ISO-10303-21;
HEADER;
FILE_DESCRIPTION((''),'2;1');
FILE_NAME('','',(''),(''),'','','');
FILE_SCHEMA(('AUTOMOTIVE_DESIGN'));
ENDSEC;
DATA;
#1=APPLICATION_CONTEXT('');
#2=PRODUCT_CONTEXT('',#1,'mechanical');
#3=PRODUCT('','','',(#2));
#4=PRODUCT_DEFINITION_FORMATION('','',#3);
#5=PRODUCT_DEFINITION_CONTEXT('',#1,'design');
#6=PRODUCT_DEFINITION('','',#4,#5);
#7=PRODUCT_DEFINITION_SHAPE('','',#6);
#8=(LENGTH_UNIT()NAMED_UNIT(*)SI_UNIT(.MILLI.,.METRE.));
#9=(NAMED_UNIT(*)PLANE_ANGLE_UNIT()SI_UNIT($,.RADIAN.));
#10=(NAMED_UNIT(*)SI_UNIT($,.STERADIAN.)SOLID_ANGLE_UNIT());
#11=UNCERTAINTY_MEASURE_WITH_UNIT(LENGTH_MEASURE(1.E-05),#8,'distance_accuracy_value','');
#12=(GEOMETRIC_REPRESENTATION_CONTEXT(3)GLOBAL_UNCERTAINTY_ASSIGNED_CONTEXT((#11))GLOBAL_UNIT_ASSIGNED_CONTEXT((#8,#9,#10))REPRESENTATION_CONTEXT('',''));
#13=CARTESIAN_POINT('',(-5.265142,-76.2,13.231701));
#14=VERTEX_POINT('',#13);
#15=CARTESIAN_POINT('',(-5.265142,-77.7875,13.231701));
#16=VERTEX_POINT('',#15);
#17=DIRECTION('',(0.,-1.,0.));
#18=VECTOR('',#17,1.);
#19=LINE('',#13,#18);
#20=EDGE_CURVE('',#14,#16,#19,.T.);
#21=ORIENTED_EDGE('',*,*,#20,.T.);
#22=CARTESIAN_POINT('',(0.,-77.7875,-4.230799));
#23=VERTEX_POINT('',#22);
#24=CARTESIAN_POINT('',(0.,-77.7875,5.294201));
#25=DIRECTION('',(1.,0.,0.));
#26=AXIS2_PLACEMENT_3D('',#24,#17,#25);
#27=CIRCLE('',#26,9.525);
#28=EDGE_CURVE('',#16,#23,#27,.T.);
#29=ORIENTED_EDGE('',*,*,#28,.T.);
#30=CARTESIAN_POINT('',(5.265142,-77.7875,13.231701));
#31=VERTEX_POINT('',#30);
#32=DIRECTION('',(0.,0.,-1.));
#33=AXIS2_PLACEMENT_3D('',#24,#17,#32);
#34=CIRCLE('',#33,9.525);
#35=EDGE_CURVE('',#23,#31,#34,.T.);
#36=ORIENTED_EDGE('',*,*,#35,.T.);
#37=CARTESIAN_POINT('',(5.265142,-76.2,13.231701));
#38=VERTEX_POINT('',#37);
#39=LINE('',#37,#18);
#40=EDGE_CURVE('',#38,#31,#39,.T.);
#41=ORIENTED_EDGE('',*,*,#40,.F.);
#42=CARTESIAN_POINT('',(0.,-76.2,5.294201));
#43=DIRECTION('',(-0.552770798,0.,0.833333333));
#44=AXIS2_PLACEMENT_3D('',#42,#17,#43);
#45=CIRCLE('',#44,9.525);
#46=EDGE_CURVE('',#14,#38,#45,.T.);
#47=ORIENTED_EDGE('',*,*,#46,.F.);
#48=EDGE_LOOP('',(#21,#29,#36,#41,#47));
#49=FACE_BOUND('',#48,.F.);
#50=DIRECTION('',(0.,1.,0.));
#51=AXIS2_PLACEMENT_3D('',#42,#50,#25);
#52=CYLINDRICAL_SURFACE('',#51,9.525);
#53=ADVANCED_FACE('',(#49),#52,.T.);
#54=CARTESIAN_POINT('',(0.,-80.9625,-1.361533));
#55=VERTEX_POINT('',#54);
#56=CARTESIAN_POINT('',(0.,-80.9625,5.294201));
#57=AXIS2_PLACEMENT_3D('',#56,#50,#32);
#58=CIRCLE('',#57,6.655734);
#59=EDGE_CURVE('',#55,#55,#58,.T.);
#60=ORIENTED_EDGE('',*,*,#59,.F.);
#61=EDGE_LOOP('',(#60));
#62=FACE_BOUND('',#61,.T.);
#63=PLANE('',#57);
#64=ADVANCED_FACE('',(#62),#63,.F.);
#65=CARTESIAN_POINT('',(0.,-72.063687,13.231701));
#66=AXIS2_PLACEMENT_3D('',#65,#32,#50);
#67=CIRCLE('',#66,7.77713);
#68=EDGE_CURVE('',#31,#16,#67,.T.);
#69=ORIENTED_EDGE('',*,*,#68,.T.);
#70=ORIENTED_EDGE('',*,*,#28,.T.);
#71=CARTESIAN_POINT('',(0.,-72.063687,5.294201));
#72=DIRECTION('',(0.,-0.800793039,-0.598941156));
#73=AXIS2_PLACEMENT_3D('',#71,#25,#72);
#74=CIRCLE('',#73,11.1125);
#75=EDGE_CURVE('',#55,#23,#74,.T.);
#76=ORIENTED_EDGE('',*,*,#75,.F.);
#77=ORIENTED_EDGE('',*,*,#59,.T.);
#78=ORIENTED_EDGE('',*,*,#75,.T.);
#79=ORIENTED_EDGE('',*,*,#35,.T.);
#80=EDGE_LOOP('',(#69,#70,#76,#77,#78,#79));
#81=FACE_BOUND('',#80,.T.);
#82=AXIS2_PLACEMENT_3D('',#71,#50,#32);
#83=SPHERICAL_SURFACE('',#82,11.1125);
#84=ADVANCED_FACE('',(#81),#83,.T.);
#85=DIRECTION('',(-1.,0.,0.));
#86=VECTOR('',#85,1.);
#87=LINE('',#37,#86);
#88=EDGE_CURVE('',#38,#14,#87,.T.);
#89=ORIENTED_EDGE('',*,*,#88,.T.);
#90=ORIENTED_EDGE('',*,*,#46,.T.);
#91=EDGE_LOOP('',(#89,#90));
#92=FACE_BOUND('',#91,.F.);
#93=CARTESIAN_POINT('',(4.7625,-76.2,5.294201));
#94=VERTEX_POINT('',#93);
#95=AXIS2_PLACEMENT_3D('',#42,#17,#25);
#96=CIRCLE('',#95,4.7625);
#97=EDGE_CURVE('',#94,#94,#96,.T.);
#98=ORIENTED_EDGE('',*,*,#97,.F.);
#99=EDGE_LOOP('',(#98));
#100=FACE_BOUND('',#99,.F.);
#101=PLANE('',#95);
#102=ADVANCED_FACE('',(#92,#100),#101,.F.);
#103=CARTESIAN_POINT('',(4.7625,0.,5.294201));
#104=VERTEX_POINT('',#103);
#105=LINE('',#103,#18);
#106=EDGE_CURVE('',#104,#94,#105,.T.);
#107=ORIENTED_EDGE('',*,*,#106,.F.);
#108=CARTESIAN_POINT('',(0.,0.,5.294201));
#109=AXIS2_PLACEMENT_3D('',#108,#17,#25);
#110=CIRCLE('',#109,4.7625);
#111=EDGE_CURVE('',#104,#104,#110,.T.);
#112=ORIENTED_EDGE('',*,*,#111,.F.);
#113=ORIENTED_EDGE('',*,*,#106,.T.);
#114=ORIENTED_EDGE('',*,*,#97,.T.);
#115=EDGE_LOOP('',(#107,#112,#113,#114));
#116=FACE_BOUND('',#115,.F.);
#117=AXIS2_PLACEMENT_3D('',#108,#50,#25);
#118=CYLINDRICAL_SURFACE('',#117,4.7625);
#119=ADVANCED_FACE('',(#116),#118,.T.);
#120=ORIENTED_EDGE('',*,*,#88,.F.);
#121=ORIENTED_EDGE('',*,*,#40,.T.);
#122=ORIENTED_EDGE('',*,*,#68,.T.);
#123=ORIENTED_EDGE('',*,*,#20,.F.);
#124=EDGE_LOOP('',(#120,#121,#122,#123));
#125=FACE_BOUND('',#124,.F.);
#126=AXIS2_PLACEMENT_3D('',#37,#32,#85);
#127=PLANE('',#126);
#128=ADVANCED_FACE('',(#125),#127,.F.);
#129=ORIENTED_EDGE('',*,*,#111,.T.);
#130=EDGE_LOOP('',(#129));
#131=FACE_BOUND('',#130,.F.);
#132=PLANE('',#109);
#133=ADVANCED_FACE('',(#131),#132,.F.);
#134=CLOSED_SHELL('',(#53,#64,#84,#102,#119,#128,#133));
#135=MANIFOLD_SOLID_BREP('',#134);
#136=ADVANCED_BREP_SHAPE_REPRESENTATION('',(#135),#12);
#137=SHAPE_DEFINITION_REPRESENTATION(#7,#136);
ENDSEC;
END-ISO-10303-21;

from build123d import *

# Parameters (mm, degrees)
F0_R     = 4.7625
F1_DEPTH = 76.2
F2_R     = 9.525
F2_R_2   = 4.7625
F3_DEPTH = 1.5875
F7_DEPTH = 25.4


# Not quite as in the source:
# - a length typed as a fraction of an inch, garbled in the dataset ("3 / 203.2 mm" for 3/8 in), is restored


with BuildPart() as f1:
    # F0 (on Front) → F1 (new body)
    with BuildSketch(Plane.XZ):
        with Locations((0, 5.2942009643)):
            Circle(F0_R)
    extrude(amount=F1_DEPTH)

    # F2 (on face) → F3 (join)
    with BuildSketch(Plane.XZ.offset(76.2)):
        with Locations((0, 5.2942009643)):
            Circle(F2_R)
        with Locations((0, 5.2942009643)):
            Circle(F2_R_2, mode=Mode.SUBTRACT)
        with Locations((0, 5.2942009643)):
            Circle(F2_R_2)
    extrude(amount=F3_DEPTH)

    # F4 (on Right) → F5 (revolve)
    with BuildSketch(Plane.YZ):
        with BuildLine():
            ThreePointArc((-80.9625, -1.3615326297), (-79.514423226, -2.9504452476), (-77.7875, -4.2307990357))
            Line((-77.7875, -4.2307990357), (-77.7875, 5.2942009643))
            Line((-77.7875, 5.2942009643), (-80.9625, 5.2942009643))
            Line((-80.9625, 5.2942009643), (-80.9625, -1.3615326297))
        make_face()
    revolve(axis=Axis((0, -79.375, 5.2942009643), (0, 1, 0)))

    # F6 (on face) → F7 (cut)
    with BuildSketch(Plane(origin=(0, -76.2, 0), x_dir=(-1, 0, 0), z_dir=(0, 1, 0))):
        with BuildLine():
            Line((0, 13.2317009643), (5.2651418547, 13.2317009643))
            ThreePointArc((5.2651418547, 13.2317009643), (0, 14.8192009643), (-5.2651418547, 13.2317009643))
            Line((-5.2651418547, 13.2317009643), (0, 13.2317009643))
        make_face()
    extrude(amount=-F7_DEPTH, mode=Mode.SUBTRACT)


solid = f1.part
